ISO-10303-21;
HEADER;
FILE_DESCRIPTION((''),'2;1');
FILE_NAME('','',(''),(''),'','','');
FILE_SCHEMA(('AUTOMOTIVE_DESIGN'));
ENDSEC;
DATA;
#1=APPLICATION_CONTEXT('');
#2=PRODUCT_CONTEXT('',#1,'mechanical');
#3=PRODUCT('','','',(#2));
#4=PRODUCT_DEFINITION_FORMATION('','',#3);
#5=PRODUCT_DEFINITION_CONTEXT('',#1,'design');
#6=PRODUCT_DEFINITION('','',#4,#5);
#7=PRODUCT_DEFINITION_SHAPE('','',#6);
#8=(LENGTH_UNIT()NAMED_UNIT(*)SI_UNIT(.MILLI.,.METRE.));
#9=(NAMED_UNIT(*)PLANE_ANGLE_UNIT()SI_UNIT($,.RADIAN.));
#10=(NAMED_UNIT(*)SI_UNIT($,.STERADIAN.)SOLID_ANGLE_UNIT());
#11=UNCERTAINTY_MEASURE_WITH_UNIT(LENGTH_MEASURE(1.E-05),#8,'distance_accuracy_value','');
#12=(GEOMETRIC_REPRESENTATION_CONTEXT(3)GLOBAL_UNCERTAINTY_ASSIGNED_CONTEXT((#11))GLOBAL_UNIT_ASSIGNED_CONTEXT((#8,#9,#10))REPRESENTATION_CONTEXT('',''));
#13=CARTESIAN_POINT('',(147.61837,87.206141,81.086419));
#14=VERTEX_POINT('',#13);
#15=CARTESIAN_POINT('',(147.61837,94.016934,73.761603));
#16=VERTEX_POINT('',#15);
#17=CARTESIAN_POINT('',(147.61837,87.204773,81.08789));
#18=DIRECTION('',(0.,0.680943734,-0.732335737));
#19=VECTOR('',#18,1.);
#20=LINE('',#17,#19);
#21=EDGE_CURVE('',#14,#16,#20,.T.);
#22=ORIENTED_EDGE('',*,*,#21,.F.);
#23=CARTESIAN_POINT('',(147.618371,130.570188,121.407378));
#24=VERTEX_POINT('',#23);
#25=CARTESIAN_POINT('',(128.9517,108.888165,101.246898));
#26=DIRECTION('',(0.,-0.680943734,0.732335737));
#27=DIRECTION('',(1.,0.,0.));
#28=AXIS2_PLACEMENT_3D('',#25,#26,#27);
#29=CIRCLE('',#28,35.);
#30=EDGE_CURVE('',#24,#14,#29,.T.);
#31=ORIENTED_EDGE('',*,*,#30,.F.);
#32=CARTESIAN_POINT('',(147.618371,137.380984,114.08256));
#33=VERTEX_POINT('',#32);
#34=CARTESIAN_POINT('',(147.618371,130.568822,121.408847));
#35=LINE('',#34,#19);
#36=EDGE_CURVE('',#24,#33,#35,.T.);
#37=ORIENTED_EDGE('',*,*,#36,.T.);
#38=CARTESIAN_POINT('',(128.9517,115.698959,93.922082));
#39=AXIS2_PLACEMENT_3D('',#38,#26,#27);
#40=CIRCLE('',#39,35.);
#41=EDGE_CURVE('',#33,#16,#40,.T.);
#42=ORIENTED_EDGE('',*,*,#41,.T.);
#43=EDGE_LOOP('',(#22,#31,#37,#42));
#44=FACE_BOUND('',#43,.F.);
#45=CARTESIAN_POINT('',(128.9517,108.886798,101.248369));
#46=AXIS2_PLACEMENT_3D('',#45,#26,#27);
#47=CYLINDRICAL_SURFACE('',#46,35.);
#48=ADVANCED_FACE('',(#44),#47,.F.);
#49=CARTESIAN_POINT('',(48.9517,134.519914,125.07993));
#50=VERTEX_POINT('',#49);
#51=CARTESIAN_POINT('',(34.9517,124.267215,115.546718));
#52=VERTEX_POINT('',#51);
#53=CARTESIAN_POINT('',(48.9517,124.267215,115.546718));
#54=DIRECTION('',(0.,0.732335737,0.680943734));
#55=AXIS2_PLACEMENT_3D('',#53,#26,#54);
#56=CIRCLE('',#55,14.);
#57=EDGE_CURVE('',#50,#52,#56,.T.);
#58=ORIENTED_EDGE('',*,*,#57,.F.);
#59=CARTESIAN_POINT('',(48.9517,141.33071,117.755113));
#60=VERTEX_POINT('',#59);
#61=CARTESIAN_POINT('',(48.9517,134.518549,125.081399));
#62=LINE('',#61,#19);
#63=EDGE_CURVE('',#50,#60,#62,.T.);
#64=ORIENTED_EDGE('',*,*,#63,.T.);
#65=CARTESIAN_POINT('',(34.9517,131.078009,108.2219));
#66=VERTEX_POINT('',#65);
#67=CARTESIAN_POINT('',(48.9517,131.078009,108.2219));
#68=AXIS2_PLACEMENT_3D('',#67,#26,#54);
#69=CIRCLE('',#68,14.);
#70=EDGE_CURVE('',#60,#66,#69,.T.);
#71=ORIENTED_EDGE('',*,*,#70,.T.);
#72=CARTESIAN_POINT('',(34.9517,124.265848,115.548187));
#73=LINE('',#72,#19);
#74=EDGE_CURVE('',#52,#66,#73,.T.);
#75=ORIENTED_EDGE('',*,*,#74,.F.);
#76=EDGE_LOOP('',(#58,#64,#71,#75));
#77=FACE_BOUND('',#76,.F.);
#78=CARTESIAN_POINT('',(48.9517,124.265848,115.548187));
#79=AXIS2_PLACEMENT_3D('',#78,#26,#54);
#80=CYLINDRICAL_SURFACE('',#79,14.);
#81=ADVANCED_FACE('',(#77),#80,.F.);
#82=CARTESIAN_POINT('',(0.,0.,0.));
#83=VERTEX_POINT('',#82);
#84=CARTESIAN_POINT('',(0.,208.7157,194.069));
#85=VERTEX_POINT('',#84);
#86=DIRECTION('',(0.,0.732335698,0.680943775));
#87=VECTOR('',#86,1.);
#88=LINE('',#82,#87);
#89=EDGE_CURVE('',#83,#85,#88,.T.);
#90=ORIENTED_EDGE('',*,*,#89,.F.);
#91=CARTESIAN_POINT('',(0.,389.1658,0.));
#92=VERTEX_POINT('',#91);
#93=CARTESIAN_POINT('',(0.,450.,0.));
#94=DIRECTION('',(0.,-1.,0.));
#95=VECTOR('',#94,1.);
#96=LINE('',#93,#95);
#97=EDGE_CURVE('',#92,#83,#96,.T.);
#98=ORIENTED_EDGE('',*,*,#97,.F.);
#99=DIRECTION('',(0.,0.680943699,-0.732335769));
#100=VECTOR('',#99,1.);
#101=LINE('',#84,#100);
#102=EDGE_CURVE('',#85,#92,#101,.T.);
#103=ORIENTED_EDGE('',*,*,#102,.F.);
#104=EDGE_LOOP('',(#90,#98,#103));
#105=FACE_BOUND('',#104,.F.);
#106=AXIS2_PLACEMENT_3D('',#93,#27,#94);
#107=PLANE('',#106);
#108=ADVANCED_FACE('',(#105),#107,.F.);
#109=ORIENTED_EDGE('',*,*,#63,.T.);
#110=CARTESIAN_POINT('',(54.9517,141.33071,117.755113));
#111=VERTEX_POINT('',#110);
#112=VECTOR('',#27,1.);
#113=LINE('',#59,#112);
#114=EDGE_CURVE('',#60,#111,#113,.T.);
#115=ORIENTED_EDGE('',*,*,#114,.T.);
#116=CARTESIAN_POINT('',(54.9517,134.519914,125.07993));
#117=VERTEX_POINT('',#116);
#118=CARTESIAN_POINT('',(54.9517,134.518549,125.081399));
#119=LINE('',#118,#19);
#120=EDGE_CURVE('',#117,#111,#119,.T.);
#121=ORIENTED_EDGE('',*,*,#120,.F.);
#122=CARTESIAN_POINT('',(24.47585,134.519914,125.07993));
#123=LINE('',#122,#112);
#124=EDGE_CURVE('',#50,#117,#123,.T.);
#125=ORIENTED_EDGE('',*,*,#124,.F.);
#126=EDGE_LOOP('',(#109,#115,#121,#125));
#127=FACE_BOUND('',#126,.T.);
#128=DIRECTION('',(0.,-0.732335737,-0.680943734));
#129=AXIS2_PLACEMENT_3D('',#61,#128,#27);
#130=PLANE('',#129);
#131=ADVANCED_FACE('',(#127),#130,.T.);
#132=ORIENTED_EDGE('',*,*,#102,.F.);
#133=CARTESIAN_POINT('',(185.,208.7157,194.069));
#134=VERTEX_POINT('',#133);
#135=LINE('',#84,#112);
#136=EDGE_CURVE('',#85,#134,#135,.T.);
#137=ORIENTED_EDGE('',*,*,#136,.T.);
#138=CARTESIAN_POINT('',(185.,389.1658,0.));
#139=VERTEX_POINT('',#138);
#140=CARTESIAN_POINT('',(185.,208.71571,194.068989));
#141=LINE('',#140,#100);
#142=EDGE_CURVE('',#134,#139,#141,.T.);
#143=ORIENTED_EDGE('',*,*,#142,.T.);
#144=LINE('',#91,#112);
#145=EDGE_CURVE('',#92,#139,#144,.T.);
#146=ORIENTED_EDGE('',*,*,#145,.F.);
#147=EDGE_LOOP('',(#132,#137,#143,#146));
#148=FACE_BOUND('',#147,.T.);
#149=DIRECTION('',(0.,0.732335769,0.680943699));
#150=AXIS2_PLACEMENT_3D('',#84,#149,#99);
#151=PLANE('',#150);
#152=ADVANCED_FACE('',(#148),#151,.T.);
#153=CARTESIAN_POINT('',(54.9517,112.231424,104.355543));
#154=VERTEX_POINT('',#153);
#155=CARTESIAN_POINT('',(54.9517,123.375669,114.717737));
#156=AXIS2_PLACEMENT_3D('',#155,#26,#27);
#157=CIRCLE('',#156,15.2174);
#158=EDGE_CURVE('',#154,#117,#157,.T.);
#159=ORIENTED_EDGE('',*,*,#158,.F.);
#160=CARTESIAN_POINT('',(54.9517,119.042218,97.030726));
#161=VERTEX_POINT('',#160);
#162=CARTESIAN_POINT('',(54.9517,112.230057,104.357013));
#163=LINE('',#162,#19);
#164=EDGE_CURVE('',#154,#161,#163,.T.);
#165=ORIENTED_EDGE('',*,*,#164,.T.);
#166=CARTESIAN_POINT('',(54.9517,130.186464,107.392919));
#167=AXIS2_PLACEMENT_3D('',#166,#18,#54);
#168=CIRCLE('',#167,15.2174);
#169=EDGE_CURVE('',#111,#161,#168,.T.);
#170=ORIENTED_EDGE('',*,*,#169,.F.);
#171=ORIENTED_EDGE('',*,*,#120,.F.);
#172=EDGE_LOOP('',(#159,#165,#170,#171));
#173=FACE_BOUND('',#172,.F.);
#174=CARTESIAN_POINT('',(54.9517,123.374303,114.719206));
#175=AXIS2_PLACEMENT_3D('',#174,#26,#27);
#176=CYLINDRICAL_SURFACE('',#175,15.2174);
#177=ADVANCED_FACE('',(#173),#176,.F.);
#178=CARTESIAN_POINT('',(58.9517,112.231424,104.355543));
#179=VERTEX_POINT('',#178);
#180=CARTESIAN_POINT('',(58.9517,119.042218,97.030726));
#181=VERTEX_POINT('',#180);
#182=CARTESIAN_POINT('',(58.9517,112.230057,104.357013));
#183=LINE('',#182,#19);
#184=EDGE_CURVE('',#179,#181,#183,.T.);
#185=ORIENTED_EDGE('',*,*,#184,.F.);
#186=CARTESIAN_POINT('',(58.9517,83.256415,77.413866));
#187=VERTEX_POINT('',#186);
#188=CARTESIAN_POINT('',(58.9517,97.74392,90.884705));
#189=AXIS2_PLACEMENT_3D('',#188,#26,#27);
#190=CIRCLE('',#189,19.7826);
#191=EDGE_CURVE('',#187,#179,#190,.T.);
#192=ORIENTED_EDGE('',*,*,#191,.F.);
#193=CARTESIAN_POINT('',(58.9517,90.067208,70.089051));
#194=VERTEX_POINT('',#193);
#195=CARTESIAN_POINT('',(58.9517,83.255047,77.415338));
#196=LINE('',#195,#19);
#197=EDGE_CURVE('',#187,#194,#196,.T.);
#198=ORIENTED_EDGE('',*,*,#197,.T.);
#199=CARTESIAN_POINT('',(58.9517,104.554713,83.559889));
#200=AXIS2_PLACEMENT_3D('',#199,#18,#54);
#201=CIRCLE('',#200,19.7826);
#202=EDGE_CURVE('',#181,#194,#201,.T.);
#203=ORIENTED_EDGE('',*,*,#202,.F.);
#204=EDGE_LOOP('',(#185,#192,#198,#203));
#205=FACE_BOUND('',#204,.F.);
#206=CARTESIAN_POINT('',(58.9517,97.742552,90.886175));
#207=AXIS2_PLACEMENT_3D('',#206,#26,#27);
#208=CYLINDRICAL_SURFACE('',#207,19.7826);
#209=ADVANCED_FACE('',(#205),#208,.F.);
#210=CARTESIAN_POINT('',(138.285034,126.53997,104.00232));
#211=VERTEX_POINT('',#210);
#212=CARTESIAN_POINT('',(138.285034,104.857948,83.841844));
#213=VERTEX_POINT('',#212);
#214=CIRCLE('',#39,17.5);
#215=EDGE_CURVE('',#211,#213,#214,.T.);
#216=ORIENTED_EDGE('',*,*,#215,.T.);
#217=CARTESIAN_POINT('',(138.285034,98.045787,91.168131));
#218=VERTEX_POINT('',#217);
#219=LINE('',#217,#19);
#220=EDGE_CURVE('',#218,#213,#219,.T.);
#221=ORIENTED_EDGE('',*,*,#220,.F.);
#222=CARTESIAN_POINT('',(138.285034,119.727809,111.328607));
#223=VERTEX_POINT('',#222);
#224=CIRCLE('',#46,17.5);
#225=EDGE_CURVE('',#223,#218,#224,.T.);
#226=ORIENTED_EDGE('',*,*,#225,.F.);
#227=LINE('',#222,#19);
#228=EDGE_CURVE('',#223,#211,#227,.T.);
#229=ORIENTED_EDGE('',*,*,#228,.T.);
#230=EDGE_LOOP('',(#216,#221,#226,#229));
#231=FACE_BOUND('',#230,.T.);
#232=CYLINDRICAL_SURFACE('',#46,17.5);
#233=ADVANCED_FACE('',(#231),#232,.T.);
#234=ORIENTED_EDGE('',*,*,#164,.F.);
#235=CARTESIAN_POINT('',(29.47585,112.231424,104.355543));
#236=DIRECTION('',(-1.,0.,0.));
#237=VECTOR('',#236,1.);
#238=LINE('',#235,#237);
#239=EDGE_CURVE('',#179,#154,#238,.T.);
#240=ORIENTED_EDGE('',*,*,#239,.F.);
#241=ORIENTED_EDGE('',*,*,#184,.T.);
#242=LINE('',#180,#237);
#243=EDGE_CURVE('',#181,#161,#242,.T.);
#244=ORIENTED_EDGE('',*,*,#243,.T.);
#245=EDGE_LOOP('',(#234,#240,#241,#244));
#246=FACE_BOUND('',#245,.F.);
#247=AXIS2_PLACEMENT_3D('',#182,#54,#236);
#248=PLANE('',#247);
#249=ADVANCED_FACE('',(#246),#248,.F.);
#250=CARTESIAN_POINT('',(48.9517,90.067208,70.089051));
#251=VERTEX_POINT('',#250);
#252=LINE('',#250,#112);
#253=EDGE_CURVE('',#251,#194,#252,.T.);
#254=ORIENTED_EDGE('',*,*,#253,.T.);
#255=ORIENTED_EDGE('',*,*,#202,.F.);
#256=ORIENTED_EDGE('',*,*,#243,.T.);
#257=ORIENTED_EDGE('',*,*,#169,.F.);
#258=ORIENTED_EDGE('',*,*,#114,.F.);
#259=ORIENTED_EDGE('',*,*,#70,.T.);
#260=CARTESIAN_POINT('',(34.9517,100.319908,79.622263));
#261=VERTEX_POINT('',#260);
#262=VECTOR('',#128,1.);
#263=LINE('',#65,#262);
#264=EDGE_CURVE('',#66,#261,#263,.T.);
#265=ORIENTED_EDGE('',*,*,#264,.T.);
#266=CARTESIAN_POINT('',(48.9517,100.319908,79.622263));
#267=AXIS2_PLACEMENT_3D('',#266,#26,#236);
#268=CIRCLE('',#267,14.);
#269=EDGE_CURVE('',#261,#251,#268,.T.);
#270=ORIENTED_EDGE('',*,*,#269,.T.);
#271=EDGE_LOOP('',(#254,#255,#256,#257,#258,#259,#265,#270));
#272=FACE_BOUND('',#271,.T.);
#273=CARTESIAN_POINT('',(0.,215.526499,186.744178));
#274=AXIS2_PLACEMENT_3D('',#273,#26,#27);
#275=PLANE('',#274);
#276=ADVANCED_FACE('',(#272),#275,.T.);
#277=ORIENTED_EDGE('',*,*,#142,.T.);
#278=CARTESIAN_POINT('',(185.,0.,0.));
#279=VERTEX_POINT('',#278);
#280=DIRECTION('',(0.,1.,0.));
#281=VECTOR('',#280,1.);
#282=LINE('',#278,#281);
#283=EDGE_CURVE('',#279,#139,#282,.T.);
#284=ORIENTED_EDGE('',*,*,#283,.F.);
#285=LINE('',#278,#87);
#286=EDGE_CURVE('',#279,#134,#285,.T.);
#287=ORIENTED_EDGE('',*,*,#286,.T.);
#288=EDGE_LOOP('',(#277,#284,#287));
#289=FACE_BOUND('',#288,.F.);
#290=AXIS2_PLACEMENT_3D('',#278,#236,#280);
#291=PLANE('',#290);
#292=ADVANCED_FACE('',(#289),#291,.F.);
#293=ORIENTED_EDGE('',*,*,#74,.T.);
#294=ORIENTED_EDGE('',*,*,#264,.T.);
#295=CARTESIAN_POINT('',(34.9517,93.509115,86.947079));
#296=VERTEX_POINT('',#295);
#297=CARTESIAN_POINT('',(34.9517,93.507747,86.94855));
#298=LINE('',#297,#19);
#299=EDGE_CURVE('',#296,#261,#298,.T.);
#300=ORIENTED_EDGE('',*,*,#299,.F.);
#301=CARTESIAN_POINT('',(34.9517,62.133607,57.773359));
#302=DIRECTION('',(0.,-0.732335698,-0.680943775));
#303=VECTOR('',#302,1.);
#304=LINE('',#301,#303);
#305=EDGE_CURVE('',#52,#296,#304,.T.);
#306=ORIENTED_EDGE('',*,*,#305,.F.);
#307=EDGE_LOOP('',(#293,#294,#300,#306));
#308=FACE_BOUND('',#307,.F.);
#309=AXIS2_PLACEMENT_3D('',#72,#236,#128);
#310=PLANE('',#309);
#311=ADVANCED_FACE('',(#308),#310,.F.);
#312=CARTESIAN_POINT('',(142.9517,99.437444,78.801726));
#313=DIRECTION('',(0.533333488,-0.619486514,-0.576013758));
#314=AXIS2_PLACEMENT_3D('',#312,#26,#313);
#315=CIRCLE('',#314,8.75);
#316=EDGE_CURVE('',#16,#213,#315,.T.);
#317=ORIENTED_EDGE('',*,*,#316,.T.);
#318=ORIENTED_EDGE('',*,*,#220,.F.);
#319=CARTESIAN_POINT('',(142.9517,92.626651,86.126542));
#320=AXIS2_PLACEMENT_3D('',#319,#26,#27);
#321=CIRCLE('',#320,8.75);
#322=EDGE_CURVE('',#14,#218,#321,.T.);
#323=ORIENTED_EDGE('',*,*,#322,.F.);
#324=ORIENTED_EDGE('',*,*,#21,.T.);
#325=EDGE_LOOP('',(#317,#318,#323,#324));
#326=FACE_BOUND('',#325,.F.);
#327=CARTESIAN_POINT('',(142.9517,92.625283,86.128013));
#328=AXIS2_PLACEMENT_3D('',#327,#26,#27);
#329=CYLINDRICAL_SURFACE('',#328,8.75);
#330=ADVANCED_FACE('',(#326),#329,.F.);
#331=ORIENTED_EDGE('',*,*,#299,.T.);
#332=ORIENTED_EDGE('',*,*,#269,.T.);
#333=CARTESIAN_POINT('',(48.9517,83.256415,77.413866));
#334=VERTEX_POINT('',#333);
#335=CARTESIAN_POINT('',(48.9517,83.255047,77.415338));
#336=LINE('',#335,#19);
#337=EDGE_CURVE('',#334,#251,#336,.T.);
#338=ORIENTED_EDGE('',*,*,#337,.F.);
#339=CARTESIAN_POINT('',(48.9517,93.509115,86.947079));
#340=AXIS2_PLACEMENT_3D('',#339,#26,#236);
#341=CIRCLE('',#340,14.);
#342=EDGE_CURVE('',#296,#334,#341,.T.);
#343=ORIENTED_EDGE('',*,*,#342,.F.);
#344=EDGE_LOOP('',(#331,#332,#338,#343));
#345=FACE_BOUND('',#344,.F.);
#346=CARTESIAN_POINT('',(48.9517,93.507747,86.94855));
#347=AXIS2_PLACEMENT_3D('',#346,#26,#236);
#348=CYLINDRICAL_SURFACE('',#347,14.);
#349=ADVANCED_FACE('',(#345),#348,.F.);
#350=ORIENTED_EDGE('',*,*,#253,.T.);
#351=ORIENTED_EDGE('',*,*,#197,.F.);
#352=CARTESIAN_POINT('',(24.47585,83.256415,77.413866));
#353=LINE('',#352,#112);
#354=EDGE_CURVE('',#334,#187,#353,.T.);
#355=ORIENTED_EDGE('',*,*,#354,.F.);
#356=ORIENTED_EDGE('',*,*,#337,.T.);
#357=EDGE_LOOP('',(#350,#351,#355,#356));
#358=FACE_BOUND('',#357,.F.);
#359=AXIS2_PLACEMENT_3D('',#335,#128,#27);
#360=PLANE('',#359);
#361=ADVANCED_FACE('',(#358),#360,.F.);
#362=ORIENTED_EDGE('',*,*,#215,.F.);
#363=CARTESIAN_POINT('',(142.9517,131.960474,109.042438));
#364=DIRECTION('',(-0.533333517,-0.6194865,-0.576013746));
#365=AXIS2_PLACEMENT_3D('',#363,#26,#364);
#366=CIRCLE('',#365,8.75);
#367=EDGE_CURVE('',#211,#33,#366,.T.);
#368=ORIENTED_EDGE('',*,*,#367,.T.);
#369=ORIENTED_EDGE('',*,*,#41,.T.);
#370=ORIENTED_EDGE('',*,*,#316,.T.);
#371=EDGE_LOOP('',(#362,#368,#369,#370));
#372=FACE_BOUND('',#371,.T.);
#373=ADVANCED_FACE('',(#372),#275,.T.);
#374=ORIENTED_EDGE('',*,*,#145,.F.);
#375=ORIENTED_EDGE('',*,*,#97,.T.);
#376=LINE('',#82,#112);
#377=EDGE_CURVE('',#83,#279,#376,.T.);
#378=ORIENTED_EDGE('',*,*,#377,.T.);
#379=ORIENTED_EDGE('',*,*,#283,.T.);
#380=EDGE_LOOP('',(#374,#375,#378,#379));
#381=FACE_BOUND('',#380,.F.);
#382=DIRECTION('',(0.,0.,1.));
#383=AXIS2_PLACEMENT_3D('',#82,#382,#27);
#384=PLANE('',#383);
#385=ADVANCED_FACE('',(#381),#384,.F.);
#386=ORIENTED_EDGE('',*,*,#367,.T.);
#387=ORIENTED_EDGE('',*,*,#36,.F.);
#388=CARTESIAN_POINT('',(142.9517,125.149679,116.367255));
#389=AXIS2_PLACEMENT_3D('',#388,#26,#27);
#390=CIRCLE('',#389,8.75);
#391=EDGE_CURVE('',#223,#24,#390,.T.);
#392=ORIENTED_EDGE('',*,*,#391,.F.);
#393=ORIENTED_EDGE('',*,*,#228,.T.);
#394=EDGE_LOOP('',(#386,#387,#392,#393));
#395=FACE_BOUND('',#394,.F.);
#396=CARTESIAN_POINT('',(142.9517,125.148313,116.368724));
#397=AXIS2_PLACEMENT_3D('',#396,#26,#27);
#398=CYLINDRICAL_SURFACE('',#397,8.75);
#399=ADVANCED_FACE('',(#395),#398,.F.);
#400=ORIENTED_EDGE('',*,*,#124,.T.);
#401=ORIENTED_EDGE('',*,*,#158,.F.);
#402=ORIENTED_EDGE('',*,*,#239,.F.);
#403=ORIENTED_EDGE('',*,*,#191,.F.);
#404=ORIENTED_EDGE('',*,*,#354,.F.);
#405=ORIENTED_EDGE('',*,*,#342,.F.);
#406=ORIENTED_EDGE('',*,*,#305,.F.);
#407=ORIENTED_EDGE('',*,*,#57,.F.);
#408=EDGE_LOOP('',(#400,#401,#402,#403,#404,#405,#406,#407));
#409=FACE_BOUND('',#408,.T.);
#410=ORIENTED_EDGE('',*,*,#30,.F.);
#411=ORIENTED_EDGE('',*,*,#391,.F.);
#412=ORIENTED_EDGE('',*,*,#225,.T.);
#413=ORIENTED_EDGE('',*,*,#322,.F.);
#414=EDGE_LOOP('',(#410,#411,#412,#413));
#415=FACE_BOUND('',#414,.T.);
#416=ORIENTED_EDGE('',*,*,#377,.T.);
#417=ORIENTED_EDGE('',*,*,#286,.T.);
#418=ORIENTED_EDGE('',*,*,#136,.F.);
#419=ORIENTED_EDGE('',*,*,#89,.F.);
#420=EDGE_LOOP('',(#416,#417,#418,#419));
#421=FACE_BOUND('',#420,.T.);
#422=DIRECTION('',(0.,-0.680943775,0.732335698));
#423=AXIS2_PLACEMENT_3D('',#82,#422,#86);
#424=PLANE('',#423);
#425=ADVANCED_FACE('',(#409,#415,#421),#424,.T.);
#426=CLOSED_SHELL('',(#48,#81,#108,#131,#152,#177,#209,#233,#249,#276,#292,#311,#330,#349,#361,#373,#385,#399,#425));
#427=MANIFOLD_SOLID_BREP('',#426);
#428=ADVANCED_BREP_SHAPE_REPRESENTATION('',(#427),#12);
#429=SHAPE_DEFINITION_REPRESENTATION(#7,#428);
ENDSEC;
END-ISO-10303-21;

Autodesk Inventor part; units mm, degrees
ref_plane "YZ Plane" through (0, 0, 0) normal (1, 0, 0) x (0, 1, 0)
ref_plane "XZ Plane" through (0, 0, 0) normal (0, 1, 0) x (-1, 0, 0)
ref_plane "XY Plane" through (0, 0, 0) normal (0, 0, 1) x (1, 0, 0)
sketch "Sketch1" plane through (0, 0, 0) normal (0, 0, 1) x (1, 0, 0)
  line L0 (0, 0) -> (185, 0)
  line L1 (185, 0) -> (185, 450)
  line L2 (185, 450) -> (0, 450)
  line L3 (0, 450) -> (0, 0)
  dimension "d0" = 185
  dimension "d1" = 450
extrude "Extrusion1" add sketch "Sketch1" along normal blind 400
sketch "Sketch2" plane through (0, 0, 0) normal (-1, 0, 0) x (0, 0, 1)
  line L0 (0, 0) -> (0, 450) projected
  line L1 (0, 0) -> (194.069, 208.7157)
  line L2 (194.069, 208.7157) -> (0, 389.1658)
  line L3 (0, 0) -> (0, 389.1658)
  line L4 (0, 450) -> (0, 0) projected
  line L5 (0, 0) -> (400, 0) projected
  line L6 (400, 450) -> (400, 0) projected
  line L7 (0, 450) -> (400, 450) projected
  dimension "d4" = 265
  dimension "d5" = 90
  dimension "d6" = 285
extrude "Extrusion2" cut sketch "Sketch2" against normal blind 400 contours L1 L2 L0 L7 L6 L5
sketch "Sketch3" plane through (0, 208.7157, 194.069) normal (0, -0.6809437, 0.7323357) x (1, 0, 0)
  line L0 (34.9517, -115.3139) -> (34.9517, -157.3139)
  line L1 (48.9517, -171.3139) -> (58.9517, -171.3139)
  line L2 (48.9517, -101.3139) -> (54.9517, -101.3139)
  circle A0 centre (54.9517, -116.5313) radius 15.2174
  circle A1 centre (58.9517, -151.5313) radius 19.7826
  line L3 (58.9517, -131.7487) -> (54.9517, -131.7487)
  arc A2 (48.9517, -101.3139) -> (34.9517, -115.3139) centre (48.9517, -115.3139) ccw
  arc A3 (34.9517, -157.3139) -> (48.9517, -171.3139) centre (48.9517, -157.3139) ccw
  circle A4 centre (128.9517, -136.3139) radius 35
  circle A5 centre (128.9517, -136.3139) radius 17.5
  circle A6 centre (142.9517, -114.1089) radius 8.75
  circle A7 centre (142.9517, -158.5189) radius 8.75
  point P0 (0, -285)
  point P1 (0, 0)
  point P2 (34.9517, -101.3139)
  point P3 (34.9517, -171.3139)
  point P4 (34.9517, -136.3139)
  point P5 (135.9261, 202.4385)
  point P6 (135.9261, 232.0451)
  point P7 (145.2595, 246.8485)
  point P8 (145.2595, 187.6351)
  point P9 (52.5928, 252.2418)
  point P10 (56.5928, 182.2418)
  point P11 (138.285, -151.1172)
  point P12 (138.285, -121.5105)
  point P13 (147.6184, -106.7072)
  point P14 (147.6184, -165.9206)
  point P15 (58.9517, -171.3139)
  dimension "d12" = 30.4348
  dimension "d13" = 39.5652
  dimension "d9" = 70
  dimension "d10" = 24
  dimension "d11" = 20
  dimension "d14" = 15.2174
  dimension "d15" = 19.7826
  dimension "d16" = 14
  dimension "d17" = 70
  dimension "d18" = 35
  dimension "d19" = 17.5
  dimension "d20" = 17.5
  dimension "d21" = 14
  dimension "d22" = 70
extrude "Extrusion3" cut sketch "Sketch3" against normal blind 10 contours A2 L2 A0 L3 A1 L1 A3 L0 | A0 | A1 | A6 A5 A7 A4 | A6 | A7 picked at (128.1694, -161.6024)
equation "\"d12\" = 0.434783 * d9"
equation "\"d13\" = d9 - d12"
equation "\"d10\" = 1.2 * d11"
equation "\"d11\" = 0.285714 * d9"
equation "\"d14\" = 0.5 * d12"
equation "\"d15\" = 0.5 * d13"
equation "\"d16\" = 0.2 * d9"
equation "\"d17\" = d9"
equation "\"d18\" = 0.5 * d17"
equation "\"d19\" = -0.5 * d18 + 0.5 * d17"
equation "\"d20\" = d19"
equation "\"d21\" = 0.2 * d17"
equation "\"d22\" = d9"
properties part number "Triangle_V3"
